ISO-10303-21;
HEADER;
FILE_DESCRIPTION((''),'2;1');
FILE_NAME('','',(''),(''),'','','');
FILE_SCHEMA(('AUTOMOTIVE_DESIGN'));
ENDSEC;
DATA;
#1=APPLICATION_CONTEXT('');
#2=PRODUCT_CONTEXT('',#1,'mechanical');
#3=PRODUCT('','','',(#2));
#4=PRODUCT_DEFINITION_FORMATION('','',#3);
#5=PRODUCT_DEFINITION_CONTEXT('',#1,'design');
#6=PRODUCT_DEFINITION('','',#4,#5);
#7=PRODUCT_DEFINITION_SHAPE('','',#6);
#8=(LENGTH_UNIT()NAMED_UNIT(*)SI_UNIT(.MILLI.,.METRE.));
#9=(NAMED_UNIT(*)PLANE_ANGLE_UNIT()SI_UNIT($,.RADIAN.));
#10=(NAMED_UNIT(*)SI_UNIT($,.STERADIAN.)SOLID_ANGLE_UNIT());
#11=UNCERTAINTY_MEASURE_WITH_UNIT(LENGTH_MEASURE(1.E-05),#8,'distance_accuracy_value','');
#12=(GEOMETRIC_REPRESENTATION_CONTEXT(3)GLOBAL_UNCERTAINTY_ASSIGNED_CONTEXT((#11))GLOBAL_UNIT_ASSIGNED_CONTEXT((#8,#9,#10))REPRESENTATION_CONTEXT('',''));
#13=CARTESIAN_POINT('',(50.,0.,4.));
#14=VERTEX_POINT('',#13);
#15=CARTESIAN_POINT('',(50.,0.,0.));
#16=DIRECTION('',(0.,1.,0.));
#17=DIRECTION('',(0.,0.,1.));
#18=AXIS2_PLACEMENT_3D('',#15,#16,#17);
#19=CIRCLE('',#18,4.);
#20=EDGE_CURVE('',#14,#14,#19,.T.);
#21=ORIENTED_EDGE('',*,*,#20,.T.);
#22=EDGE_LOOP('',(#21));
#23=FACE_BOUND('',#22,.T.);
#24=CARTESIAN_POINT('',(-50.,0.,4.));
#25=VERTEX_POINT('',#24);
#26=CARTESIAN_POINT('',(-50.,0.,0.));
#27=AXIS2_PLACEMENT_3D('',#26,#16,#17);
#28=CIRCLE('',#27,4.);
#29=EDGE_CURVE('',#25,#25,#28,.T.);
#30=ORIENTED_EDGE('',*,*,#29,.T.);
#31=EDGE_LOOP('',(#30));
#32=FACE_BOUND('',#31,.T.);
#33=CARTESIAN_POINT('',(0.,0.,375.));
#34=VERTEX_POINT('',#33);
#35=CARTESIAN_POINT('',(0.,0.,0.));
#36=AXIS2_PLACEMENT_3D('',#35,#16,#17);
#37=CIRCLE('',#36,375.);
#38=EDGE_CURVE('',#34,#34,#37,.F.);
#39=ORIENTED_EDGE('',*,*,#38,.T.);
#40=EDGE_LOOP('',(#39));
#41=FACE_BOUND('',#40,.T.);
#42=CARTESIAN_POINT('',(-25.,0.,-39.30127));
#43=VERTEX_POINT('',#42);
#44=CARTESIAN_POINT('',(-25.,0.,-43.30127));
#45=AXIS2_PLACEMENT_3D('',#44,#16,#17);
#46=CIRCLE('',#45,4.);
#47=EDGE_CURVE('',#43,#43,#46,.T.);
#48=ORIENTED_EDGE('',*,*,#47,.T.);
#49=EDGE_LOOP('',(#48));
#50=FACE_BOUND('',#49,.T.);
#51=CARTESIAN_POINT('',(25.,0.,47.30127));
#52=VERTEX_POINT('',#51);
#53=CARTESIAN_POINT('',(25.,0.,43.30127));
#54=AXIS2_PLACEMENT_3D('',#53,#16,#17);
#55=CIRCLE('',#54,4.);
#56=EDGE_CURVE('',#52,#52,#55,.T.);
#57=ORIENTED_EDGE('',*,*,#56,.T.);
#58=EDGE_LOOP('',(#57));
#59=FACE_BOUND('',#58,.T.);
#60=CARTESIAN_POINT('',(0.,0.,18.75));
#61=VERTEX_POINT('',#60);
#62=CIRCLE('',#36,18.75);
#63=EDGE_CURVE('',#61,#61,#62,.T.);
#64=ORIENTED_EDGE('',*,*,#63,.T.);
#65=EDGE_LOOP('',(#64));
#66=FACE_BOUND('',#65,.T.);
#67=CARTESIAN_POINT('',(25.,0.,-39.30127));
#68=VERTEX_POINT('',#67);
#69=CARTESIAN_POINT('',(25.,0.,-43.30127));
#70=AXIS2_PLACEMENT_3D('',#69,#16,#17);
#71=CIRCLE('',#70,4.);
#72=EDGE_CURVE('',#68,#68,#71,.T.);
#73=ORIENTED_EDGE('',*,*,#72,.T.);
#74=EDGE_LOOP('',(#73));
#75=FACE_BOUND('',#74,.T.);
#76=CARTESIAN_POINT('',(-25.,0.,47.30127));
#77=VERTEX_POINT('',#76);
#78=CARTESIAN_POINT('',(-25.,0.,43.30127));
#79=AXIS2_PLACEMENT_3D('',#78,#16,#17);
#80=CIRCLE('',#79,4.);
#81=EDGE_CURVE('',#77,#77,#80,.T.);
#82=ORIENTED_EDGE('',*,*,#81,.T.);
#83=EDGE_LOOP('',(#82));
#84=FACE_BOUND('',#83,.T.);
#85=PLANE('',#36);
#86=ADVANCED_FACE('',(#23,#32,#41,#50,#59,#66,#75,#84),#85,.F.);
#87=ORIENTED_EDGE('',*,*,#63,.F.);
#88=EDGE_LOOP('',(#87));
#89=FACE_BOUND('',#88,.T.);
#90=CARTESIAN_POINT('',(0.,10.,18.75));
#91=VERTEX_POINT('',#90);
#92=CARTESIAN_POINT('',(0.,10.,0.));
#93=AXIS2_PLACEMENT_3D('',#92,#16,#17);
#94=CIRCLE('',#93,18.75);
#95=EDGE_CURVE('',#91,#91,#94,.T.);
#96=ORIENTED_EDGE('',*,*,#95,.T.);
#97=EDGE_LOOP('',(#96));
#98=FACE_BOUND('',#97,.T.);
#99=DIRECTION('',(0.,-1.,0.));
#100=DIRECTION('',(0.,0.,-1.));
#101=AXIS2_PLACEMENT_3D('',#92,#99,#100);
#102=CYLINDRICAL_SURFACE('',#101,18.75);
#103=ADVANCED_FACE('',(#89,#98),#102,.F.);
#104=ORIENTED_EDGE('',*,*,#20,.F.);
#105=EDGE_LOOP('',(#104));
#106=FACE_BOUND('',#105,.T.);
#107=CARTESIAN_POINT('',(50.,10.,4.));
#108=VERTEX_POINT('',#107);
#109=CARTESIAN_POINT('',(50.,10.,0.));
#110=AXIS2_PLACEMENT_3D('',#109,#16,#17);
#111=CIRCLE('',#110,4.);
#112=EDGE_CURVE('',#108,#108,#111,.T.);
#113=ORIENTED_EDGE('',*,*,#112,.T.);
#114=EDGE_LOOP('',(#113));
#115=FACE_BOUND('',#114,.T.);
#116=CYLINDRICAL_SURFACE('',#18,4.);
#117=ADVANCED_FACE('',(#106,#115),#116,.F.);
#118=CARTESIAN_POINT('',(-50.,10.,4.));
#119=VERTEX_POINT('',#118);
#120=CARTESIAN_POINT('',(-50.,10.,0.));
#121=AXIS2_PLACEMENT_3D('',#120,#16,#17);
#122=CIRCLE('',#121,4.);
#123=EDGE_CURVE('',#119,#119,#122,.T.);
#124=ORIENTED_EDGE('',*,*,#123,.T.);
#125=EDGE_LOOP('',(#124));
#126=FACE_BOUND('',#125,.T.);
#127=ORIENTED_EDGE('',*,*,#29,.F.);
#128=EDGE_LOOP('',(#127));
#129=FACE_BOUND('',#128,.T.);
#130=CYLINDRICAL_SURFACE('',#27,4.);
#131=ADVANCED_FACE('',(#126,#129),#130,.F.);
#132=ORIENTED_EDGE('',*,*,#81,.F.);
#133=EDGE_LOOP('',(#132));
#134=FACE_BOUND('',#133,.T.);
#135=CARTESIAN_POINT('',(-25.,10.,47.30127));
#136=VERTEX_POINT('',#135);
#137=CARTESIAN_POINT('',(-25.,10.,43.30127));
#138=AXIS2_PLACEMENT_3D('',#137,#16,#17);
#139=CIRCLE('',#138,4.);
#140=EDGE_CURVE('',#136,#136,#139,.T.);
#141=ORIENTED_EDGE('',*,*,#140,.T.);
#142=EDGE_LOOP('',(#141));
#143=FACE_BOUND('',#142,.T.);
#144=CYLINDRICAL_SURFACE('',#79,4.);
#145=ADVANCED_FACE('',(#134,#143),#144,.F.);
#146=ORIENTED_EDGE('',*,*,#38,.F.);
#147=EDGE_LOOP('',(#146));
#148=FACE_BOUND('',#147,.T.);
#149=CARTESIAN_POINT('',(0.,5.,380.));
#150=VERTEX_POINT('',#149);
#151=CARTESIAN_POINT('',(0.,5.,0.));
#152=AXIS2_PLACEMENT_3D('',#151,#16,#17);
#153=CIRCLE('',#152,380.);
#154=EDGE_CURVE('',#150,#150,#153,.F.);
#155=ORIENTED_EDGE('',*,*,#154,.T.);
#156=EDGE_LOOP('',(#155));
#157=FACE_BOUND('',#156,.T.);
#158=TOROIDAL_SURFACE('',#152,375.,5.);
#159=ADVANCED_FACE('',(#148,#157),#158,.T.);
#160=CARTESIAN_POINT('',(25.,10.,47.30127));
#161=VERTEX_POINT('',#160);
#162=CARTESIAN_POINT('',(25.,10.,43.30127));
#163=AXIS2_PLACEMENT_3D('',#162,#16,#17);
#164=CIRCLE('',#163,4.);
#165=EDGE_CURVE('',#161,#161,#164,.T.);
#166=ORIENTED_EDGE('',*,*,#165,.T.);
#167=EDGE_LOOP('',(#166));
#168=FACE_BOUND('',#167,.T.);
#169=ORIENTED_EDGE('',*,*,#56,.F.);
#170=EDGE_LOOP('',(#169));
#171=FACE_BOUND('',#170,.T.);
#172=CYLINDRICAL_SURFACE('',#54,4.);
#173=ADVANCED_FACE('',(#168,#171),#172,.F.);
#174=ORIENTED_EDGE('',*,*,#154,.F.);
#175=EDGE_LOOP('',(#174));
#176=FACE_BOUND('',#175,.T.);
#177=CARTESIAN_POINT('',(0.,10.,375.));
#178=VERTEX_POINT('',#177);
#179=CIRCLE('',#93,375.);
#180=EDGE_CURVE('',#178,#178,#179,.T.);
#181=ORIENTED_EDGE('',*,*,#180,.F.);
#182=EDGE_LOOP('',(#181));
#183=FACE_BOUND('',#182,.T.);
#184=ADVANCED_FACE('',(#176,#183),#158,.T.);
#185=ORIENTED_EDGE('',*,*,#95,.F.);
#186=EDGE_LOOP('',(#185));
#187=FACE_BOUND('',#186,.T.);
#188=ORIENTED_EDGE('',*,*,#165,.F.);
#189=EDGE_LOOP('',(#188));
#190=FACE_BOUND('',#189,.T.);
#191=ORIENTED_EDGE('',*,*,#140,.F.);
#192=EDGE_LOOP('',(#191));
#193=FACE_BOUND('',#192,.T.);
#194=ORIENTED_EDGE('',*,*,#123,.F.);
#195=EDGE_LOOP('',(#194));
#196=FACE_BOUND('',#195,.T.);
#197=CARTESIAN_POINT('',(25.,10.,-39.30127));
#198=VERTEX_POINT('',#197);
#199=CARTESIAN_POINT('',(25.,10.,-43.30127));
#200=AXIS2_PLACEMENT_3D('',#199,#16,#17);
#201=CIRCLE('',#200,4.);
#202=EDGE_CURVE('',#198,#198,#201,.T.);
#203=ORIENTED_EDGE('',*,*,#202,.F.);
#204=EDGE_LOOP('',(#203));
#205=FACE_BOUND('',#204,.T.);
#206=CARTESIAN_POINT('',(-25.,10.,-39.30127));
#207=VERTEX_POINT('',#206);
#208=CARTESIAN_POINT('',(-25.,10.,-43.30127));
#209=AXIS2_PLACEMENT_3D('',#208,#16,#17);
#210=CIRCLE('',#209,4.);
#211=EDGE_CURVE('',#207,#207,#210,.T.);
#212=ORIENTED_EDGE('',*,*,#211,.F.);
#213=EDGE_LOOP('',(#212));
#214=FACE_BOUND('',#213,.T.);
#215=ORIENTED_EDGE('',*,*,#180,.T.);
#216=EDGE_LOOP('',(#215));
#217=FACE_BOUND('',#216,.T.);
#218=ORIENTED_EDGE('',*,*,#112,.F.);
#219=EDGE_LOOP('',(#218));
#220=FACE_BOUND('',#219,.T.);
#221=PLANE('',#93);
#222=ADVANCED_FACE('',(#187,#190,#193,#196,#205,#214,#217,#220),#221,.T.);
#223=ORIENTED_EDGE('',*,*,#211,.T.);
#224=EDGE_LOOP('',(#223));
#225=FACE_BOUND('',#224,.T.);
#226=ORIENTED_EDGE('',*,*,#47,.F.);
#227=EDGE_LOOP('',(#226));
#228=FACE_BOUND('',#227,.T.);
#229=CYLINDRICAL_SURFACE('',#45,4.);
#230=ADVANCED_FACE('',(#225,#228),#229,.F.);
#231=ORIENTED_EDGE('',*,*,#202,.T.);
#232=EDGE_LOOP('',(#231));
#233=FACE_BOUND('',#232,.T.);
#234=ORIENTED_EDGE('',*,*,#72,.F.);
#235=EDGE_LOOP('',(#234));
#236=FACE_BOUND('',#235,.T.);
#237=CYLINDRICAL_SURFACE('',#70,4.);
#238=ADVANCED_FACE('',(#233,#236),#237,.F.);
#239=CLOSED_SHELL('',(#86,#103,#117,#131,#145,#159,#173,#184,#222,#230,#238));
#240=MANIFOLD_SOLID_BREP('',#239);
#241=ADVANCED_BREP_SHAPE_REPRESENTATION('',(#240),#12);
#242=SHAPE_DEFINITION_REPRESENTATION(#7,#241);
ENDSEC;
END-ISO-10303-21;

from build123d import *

# Parameters (mm, degrees)
CROQUIS1_R              = 380
CROQUIS1_R_2            = 18.75
SALIENTE_EXTRUIR1_DEPTH = 10
CROQUIS2_R              = 4
CORTAR_EXTRUIR1_DEPTH   = 538.494186015
REDONDEO1_R             = 5


with BuildPart() as part:
    # Croquis1 → Saliente-Extruir1 (new body)
    with BuildSketch(Plane(origin=(0, 0, 0), x_dir=(1, 0, 0), z_dir=(0, 1, 0))):
        with Locations(Location((0, 0, 0), (0, 0, 270))):
            Circle(CROQUIS1_R)
        with Locations(Location((0, 0, 0), (0, 0, 270))):
            Circle(CROQUIS1_R_2, mode=Mode.SUBTRACT)
    extrude(amount=SALIENTE_EXTRUIR1_DEPTH)

    # Croquis2 → Cortar-Extruir1 (cut, through all)
    with BuildSketch(Plane(origin=(0, 10, 0), x_dir=(1, 0, 0), z_dir=(0, 1, 0))):
        with Locations(Location((-25, -43.301270189, 0), (0, 0, 270))):
            Circle(CROQUIS2_R)
        with Locations(Location((-50, 0, 0), (0, 0, 270))):
            Circle(CROQUIS2_R)
        with Locations(Location((-25, 43.301270189, 0), (0, 0, 270))):
            Circle(CROQUIS2_R)
        with Locations(Location((25, 43.301270189, 0), (0, 0, 270))):
            Circle(CROQUIS2_R)
        with Locations(Location((50, 0, 0), (0, 0, 270))):
            Circle(CROQUIS2_R)
        with Locations(Location((25, -43.301270189, 0), (0, 0, 270))):
            Circle(CROQUIS2_R)
    extrude(amount=-CORTAR_EXTRUIR1_DEPTH, mode=Mode.SUBTRACT)

    # Redondeo1
    redondeo1_edges = [part.edges().sort_by_distance(p)[0] for p in [
        (0, 0, -380),
        (0, 10, -380),
    ]]
    fillet(redondeo1_edges, radius=REDONDEO1_R - 0.0001)  # a hair under: the kernel refuses the full size


solid = part.part
